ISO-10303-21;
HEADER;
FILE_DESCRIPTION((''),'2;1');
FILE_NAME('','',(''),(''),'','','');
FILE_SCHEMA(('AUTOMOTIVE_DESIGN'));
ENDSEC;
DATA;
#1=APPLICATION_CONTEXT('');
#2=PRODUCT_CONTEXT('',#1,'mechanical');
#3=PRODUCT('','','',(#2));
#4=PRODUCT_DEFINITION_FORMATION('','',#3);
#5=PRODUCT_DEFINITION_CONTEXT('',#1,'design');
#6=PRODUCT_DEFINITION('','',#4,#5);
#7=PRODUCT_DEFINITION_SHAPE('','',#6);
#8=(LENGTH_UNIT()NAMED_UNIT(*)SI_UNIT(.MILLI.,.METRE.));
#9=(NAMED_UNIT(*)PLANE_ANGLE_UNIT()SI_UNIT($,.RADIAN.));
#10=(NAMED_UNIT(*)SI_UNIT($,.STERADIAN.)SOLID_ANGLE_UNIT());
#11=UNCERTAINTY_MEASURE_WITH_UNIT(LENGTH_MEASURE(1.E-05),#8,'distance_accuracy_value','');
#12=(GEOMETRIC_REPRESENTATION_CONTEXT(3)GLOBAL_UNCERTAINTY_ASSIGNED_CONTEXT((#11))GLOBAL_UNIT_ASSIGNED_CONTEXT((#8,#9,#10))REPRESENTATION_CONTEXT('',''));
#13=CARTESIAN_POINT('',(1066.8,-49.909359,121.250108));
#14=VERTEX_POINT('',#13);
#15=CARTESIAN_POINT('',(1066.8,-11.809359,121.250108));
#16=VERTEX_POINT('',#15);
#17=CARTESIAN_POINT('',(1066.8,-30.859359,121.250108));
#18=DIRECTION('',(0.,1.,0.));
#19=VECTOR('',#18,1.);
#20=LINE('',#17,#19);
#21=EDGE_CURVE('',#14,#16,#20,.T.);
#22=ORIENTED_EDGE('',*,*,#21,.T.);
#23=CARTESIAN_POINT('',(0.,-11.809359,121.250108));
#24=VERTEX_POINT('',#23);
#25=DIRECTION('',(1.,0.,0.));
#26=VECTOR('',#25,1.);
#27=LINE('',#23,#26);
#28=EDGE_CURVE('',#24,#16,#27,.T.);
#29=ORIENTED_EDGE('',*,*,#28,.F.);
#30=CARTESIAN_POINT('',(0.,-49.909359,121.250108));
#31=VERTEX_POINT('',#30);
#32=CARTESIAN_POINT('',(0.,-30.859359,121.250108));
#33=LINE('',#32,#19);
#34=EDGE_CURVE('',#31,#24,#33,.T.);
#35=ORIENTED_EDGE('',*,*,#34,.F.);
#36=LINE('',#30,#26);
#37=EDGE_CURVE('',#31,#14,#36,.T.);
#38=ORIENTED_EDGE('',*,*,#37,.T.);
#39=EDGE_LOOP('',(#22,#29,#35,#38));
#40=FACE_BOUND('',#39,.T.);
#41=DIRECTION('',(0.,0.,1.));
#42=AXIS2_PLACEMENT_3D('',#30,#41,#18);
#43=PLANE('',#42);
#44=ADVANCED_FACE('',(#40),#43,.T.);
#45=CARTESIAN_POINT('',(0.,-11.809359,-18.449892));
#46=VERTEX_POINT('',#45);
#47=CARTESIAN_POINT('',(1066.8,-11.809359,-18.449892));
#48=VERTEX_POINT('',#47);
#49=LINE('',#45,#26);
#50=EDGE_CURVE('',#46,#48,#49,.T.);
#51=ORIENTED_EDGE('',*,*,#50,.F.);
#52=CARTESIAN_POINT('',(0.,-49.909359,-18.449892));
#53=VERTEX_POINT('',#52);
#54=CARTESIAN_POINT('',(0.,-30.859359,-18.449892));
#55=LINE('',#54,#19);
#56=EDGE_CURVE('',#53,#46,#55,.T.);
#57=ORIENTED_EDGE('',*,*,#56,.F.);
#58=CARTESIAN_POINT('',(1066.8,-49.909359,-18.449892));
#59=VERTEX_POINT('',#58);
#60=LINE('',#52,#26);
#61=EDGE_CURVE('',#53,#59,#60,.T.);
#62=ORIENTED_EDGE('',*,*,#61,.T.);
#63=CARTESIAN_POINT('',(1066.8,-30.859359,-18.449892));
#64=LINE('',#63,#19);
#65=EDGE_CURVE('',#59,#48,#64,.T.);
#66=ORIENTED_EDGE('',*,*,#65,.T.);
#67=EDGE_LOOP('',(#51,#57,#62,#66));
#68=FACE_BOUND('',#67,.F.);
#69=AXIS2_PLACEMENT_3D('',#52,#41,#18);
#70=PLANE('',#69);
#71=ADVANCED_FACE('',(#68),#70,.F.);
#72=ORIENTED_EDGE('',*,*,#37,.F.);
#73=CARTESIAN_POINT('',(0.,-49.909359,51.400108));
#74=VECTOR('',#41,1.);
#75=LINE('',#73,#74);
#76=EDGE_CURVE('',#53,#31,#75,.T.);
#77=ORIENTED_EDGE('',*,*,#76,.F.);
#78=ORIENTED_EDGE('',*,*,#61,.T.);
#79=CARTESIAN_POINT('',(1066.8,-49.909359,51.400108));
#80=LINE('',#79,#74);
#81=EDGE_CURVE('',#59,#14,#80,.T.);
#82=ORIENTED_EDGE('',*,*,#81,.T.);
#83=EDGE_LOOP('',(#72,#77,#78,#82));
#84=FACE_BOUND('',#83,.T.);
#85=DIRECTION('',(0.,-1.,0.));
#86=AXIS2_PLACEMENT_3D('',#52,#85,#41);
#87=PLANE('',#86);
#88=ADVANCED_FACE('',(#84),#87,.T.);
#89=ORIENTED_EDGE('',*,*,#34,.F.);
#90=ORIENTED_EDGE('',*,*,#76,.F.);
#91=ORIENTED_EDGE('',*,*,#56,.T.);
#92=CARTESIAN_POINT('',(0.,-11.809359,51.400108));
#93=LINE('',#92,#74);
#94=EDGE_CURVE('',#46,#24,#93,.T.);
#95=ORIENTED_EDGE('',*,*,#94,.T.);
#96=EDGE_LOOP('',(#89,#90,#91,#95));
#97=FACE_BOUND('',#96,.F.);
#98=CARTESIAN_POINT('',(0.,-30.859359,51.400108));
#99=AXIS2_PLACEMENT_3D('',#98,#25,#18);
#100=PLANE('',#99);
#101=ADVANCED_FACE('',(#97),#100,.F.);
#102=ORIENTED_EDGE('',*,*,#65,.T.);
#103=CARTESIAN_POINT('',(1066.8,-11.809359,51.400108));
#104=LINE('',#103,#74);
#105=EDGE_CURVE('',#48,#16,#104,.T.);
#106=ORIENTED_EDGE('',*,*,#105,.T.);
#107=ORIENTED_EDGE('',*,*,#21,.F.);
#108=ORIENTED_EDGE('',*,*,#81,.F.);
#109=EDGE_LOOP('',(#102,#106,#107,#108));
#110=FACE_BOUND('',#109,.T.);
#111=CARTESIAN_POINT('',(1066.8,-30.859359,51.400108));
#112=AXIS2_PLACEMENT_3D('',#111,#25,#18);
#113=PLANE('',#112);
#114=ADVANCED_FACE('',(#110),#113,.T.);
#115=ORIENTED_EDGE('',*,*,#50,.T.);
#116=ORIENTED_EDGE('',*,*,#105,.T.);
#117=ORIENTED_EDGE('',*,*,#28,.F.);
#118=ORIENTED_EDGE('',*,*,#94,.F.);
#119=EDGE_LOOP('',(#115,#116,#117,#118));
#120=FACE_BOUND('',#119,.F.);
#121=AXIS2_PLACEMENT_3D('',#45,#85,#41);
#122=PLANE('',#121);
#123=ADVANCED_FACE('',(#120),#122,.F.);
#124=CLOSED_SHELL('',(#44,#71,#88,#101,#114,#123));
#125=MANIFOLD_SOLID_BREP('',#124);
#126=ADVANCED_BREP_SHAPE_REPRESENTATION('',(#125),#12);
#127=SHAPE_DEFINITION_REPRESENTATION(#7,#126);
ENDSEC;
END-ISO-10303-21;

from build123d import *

# Parameters (mm, degrees)
F1_W     = 38.1
F1_H     = 139.7
F2_DEPTH = 1066.8


# Not quite as in the source:
# - a variable given as a bare number and used for a length is read in inches; the dataset says mm whatever the document's units were


with BuildPart() as f2:
    # F1 (on Right) → F2 (new body)
    with BuildSketch(Plane.YZ):
        with Locations((-30.8593586087, 51.4001077512)):
            Rectangle(F1_W, F1_H)
    extrude(amount=F2_DEPTH)


solid = f2.part
